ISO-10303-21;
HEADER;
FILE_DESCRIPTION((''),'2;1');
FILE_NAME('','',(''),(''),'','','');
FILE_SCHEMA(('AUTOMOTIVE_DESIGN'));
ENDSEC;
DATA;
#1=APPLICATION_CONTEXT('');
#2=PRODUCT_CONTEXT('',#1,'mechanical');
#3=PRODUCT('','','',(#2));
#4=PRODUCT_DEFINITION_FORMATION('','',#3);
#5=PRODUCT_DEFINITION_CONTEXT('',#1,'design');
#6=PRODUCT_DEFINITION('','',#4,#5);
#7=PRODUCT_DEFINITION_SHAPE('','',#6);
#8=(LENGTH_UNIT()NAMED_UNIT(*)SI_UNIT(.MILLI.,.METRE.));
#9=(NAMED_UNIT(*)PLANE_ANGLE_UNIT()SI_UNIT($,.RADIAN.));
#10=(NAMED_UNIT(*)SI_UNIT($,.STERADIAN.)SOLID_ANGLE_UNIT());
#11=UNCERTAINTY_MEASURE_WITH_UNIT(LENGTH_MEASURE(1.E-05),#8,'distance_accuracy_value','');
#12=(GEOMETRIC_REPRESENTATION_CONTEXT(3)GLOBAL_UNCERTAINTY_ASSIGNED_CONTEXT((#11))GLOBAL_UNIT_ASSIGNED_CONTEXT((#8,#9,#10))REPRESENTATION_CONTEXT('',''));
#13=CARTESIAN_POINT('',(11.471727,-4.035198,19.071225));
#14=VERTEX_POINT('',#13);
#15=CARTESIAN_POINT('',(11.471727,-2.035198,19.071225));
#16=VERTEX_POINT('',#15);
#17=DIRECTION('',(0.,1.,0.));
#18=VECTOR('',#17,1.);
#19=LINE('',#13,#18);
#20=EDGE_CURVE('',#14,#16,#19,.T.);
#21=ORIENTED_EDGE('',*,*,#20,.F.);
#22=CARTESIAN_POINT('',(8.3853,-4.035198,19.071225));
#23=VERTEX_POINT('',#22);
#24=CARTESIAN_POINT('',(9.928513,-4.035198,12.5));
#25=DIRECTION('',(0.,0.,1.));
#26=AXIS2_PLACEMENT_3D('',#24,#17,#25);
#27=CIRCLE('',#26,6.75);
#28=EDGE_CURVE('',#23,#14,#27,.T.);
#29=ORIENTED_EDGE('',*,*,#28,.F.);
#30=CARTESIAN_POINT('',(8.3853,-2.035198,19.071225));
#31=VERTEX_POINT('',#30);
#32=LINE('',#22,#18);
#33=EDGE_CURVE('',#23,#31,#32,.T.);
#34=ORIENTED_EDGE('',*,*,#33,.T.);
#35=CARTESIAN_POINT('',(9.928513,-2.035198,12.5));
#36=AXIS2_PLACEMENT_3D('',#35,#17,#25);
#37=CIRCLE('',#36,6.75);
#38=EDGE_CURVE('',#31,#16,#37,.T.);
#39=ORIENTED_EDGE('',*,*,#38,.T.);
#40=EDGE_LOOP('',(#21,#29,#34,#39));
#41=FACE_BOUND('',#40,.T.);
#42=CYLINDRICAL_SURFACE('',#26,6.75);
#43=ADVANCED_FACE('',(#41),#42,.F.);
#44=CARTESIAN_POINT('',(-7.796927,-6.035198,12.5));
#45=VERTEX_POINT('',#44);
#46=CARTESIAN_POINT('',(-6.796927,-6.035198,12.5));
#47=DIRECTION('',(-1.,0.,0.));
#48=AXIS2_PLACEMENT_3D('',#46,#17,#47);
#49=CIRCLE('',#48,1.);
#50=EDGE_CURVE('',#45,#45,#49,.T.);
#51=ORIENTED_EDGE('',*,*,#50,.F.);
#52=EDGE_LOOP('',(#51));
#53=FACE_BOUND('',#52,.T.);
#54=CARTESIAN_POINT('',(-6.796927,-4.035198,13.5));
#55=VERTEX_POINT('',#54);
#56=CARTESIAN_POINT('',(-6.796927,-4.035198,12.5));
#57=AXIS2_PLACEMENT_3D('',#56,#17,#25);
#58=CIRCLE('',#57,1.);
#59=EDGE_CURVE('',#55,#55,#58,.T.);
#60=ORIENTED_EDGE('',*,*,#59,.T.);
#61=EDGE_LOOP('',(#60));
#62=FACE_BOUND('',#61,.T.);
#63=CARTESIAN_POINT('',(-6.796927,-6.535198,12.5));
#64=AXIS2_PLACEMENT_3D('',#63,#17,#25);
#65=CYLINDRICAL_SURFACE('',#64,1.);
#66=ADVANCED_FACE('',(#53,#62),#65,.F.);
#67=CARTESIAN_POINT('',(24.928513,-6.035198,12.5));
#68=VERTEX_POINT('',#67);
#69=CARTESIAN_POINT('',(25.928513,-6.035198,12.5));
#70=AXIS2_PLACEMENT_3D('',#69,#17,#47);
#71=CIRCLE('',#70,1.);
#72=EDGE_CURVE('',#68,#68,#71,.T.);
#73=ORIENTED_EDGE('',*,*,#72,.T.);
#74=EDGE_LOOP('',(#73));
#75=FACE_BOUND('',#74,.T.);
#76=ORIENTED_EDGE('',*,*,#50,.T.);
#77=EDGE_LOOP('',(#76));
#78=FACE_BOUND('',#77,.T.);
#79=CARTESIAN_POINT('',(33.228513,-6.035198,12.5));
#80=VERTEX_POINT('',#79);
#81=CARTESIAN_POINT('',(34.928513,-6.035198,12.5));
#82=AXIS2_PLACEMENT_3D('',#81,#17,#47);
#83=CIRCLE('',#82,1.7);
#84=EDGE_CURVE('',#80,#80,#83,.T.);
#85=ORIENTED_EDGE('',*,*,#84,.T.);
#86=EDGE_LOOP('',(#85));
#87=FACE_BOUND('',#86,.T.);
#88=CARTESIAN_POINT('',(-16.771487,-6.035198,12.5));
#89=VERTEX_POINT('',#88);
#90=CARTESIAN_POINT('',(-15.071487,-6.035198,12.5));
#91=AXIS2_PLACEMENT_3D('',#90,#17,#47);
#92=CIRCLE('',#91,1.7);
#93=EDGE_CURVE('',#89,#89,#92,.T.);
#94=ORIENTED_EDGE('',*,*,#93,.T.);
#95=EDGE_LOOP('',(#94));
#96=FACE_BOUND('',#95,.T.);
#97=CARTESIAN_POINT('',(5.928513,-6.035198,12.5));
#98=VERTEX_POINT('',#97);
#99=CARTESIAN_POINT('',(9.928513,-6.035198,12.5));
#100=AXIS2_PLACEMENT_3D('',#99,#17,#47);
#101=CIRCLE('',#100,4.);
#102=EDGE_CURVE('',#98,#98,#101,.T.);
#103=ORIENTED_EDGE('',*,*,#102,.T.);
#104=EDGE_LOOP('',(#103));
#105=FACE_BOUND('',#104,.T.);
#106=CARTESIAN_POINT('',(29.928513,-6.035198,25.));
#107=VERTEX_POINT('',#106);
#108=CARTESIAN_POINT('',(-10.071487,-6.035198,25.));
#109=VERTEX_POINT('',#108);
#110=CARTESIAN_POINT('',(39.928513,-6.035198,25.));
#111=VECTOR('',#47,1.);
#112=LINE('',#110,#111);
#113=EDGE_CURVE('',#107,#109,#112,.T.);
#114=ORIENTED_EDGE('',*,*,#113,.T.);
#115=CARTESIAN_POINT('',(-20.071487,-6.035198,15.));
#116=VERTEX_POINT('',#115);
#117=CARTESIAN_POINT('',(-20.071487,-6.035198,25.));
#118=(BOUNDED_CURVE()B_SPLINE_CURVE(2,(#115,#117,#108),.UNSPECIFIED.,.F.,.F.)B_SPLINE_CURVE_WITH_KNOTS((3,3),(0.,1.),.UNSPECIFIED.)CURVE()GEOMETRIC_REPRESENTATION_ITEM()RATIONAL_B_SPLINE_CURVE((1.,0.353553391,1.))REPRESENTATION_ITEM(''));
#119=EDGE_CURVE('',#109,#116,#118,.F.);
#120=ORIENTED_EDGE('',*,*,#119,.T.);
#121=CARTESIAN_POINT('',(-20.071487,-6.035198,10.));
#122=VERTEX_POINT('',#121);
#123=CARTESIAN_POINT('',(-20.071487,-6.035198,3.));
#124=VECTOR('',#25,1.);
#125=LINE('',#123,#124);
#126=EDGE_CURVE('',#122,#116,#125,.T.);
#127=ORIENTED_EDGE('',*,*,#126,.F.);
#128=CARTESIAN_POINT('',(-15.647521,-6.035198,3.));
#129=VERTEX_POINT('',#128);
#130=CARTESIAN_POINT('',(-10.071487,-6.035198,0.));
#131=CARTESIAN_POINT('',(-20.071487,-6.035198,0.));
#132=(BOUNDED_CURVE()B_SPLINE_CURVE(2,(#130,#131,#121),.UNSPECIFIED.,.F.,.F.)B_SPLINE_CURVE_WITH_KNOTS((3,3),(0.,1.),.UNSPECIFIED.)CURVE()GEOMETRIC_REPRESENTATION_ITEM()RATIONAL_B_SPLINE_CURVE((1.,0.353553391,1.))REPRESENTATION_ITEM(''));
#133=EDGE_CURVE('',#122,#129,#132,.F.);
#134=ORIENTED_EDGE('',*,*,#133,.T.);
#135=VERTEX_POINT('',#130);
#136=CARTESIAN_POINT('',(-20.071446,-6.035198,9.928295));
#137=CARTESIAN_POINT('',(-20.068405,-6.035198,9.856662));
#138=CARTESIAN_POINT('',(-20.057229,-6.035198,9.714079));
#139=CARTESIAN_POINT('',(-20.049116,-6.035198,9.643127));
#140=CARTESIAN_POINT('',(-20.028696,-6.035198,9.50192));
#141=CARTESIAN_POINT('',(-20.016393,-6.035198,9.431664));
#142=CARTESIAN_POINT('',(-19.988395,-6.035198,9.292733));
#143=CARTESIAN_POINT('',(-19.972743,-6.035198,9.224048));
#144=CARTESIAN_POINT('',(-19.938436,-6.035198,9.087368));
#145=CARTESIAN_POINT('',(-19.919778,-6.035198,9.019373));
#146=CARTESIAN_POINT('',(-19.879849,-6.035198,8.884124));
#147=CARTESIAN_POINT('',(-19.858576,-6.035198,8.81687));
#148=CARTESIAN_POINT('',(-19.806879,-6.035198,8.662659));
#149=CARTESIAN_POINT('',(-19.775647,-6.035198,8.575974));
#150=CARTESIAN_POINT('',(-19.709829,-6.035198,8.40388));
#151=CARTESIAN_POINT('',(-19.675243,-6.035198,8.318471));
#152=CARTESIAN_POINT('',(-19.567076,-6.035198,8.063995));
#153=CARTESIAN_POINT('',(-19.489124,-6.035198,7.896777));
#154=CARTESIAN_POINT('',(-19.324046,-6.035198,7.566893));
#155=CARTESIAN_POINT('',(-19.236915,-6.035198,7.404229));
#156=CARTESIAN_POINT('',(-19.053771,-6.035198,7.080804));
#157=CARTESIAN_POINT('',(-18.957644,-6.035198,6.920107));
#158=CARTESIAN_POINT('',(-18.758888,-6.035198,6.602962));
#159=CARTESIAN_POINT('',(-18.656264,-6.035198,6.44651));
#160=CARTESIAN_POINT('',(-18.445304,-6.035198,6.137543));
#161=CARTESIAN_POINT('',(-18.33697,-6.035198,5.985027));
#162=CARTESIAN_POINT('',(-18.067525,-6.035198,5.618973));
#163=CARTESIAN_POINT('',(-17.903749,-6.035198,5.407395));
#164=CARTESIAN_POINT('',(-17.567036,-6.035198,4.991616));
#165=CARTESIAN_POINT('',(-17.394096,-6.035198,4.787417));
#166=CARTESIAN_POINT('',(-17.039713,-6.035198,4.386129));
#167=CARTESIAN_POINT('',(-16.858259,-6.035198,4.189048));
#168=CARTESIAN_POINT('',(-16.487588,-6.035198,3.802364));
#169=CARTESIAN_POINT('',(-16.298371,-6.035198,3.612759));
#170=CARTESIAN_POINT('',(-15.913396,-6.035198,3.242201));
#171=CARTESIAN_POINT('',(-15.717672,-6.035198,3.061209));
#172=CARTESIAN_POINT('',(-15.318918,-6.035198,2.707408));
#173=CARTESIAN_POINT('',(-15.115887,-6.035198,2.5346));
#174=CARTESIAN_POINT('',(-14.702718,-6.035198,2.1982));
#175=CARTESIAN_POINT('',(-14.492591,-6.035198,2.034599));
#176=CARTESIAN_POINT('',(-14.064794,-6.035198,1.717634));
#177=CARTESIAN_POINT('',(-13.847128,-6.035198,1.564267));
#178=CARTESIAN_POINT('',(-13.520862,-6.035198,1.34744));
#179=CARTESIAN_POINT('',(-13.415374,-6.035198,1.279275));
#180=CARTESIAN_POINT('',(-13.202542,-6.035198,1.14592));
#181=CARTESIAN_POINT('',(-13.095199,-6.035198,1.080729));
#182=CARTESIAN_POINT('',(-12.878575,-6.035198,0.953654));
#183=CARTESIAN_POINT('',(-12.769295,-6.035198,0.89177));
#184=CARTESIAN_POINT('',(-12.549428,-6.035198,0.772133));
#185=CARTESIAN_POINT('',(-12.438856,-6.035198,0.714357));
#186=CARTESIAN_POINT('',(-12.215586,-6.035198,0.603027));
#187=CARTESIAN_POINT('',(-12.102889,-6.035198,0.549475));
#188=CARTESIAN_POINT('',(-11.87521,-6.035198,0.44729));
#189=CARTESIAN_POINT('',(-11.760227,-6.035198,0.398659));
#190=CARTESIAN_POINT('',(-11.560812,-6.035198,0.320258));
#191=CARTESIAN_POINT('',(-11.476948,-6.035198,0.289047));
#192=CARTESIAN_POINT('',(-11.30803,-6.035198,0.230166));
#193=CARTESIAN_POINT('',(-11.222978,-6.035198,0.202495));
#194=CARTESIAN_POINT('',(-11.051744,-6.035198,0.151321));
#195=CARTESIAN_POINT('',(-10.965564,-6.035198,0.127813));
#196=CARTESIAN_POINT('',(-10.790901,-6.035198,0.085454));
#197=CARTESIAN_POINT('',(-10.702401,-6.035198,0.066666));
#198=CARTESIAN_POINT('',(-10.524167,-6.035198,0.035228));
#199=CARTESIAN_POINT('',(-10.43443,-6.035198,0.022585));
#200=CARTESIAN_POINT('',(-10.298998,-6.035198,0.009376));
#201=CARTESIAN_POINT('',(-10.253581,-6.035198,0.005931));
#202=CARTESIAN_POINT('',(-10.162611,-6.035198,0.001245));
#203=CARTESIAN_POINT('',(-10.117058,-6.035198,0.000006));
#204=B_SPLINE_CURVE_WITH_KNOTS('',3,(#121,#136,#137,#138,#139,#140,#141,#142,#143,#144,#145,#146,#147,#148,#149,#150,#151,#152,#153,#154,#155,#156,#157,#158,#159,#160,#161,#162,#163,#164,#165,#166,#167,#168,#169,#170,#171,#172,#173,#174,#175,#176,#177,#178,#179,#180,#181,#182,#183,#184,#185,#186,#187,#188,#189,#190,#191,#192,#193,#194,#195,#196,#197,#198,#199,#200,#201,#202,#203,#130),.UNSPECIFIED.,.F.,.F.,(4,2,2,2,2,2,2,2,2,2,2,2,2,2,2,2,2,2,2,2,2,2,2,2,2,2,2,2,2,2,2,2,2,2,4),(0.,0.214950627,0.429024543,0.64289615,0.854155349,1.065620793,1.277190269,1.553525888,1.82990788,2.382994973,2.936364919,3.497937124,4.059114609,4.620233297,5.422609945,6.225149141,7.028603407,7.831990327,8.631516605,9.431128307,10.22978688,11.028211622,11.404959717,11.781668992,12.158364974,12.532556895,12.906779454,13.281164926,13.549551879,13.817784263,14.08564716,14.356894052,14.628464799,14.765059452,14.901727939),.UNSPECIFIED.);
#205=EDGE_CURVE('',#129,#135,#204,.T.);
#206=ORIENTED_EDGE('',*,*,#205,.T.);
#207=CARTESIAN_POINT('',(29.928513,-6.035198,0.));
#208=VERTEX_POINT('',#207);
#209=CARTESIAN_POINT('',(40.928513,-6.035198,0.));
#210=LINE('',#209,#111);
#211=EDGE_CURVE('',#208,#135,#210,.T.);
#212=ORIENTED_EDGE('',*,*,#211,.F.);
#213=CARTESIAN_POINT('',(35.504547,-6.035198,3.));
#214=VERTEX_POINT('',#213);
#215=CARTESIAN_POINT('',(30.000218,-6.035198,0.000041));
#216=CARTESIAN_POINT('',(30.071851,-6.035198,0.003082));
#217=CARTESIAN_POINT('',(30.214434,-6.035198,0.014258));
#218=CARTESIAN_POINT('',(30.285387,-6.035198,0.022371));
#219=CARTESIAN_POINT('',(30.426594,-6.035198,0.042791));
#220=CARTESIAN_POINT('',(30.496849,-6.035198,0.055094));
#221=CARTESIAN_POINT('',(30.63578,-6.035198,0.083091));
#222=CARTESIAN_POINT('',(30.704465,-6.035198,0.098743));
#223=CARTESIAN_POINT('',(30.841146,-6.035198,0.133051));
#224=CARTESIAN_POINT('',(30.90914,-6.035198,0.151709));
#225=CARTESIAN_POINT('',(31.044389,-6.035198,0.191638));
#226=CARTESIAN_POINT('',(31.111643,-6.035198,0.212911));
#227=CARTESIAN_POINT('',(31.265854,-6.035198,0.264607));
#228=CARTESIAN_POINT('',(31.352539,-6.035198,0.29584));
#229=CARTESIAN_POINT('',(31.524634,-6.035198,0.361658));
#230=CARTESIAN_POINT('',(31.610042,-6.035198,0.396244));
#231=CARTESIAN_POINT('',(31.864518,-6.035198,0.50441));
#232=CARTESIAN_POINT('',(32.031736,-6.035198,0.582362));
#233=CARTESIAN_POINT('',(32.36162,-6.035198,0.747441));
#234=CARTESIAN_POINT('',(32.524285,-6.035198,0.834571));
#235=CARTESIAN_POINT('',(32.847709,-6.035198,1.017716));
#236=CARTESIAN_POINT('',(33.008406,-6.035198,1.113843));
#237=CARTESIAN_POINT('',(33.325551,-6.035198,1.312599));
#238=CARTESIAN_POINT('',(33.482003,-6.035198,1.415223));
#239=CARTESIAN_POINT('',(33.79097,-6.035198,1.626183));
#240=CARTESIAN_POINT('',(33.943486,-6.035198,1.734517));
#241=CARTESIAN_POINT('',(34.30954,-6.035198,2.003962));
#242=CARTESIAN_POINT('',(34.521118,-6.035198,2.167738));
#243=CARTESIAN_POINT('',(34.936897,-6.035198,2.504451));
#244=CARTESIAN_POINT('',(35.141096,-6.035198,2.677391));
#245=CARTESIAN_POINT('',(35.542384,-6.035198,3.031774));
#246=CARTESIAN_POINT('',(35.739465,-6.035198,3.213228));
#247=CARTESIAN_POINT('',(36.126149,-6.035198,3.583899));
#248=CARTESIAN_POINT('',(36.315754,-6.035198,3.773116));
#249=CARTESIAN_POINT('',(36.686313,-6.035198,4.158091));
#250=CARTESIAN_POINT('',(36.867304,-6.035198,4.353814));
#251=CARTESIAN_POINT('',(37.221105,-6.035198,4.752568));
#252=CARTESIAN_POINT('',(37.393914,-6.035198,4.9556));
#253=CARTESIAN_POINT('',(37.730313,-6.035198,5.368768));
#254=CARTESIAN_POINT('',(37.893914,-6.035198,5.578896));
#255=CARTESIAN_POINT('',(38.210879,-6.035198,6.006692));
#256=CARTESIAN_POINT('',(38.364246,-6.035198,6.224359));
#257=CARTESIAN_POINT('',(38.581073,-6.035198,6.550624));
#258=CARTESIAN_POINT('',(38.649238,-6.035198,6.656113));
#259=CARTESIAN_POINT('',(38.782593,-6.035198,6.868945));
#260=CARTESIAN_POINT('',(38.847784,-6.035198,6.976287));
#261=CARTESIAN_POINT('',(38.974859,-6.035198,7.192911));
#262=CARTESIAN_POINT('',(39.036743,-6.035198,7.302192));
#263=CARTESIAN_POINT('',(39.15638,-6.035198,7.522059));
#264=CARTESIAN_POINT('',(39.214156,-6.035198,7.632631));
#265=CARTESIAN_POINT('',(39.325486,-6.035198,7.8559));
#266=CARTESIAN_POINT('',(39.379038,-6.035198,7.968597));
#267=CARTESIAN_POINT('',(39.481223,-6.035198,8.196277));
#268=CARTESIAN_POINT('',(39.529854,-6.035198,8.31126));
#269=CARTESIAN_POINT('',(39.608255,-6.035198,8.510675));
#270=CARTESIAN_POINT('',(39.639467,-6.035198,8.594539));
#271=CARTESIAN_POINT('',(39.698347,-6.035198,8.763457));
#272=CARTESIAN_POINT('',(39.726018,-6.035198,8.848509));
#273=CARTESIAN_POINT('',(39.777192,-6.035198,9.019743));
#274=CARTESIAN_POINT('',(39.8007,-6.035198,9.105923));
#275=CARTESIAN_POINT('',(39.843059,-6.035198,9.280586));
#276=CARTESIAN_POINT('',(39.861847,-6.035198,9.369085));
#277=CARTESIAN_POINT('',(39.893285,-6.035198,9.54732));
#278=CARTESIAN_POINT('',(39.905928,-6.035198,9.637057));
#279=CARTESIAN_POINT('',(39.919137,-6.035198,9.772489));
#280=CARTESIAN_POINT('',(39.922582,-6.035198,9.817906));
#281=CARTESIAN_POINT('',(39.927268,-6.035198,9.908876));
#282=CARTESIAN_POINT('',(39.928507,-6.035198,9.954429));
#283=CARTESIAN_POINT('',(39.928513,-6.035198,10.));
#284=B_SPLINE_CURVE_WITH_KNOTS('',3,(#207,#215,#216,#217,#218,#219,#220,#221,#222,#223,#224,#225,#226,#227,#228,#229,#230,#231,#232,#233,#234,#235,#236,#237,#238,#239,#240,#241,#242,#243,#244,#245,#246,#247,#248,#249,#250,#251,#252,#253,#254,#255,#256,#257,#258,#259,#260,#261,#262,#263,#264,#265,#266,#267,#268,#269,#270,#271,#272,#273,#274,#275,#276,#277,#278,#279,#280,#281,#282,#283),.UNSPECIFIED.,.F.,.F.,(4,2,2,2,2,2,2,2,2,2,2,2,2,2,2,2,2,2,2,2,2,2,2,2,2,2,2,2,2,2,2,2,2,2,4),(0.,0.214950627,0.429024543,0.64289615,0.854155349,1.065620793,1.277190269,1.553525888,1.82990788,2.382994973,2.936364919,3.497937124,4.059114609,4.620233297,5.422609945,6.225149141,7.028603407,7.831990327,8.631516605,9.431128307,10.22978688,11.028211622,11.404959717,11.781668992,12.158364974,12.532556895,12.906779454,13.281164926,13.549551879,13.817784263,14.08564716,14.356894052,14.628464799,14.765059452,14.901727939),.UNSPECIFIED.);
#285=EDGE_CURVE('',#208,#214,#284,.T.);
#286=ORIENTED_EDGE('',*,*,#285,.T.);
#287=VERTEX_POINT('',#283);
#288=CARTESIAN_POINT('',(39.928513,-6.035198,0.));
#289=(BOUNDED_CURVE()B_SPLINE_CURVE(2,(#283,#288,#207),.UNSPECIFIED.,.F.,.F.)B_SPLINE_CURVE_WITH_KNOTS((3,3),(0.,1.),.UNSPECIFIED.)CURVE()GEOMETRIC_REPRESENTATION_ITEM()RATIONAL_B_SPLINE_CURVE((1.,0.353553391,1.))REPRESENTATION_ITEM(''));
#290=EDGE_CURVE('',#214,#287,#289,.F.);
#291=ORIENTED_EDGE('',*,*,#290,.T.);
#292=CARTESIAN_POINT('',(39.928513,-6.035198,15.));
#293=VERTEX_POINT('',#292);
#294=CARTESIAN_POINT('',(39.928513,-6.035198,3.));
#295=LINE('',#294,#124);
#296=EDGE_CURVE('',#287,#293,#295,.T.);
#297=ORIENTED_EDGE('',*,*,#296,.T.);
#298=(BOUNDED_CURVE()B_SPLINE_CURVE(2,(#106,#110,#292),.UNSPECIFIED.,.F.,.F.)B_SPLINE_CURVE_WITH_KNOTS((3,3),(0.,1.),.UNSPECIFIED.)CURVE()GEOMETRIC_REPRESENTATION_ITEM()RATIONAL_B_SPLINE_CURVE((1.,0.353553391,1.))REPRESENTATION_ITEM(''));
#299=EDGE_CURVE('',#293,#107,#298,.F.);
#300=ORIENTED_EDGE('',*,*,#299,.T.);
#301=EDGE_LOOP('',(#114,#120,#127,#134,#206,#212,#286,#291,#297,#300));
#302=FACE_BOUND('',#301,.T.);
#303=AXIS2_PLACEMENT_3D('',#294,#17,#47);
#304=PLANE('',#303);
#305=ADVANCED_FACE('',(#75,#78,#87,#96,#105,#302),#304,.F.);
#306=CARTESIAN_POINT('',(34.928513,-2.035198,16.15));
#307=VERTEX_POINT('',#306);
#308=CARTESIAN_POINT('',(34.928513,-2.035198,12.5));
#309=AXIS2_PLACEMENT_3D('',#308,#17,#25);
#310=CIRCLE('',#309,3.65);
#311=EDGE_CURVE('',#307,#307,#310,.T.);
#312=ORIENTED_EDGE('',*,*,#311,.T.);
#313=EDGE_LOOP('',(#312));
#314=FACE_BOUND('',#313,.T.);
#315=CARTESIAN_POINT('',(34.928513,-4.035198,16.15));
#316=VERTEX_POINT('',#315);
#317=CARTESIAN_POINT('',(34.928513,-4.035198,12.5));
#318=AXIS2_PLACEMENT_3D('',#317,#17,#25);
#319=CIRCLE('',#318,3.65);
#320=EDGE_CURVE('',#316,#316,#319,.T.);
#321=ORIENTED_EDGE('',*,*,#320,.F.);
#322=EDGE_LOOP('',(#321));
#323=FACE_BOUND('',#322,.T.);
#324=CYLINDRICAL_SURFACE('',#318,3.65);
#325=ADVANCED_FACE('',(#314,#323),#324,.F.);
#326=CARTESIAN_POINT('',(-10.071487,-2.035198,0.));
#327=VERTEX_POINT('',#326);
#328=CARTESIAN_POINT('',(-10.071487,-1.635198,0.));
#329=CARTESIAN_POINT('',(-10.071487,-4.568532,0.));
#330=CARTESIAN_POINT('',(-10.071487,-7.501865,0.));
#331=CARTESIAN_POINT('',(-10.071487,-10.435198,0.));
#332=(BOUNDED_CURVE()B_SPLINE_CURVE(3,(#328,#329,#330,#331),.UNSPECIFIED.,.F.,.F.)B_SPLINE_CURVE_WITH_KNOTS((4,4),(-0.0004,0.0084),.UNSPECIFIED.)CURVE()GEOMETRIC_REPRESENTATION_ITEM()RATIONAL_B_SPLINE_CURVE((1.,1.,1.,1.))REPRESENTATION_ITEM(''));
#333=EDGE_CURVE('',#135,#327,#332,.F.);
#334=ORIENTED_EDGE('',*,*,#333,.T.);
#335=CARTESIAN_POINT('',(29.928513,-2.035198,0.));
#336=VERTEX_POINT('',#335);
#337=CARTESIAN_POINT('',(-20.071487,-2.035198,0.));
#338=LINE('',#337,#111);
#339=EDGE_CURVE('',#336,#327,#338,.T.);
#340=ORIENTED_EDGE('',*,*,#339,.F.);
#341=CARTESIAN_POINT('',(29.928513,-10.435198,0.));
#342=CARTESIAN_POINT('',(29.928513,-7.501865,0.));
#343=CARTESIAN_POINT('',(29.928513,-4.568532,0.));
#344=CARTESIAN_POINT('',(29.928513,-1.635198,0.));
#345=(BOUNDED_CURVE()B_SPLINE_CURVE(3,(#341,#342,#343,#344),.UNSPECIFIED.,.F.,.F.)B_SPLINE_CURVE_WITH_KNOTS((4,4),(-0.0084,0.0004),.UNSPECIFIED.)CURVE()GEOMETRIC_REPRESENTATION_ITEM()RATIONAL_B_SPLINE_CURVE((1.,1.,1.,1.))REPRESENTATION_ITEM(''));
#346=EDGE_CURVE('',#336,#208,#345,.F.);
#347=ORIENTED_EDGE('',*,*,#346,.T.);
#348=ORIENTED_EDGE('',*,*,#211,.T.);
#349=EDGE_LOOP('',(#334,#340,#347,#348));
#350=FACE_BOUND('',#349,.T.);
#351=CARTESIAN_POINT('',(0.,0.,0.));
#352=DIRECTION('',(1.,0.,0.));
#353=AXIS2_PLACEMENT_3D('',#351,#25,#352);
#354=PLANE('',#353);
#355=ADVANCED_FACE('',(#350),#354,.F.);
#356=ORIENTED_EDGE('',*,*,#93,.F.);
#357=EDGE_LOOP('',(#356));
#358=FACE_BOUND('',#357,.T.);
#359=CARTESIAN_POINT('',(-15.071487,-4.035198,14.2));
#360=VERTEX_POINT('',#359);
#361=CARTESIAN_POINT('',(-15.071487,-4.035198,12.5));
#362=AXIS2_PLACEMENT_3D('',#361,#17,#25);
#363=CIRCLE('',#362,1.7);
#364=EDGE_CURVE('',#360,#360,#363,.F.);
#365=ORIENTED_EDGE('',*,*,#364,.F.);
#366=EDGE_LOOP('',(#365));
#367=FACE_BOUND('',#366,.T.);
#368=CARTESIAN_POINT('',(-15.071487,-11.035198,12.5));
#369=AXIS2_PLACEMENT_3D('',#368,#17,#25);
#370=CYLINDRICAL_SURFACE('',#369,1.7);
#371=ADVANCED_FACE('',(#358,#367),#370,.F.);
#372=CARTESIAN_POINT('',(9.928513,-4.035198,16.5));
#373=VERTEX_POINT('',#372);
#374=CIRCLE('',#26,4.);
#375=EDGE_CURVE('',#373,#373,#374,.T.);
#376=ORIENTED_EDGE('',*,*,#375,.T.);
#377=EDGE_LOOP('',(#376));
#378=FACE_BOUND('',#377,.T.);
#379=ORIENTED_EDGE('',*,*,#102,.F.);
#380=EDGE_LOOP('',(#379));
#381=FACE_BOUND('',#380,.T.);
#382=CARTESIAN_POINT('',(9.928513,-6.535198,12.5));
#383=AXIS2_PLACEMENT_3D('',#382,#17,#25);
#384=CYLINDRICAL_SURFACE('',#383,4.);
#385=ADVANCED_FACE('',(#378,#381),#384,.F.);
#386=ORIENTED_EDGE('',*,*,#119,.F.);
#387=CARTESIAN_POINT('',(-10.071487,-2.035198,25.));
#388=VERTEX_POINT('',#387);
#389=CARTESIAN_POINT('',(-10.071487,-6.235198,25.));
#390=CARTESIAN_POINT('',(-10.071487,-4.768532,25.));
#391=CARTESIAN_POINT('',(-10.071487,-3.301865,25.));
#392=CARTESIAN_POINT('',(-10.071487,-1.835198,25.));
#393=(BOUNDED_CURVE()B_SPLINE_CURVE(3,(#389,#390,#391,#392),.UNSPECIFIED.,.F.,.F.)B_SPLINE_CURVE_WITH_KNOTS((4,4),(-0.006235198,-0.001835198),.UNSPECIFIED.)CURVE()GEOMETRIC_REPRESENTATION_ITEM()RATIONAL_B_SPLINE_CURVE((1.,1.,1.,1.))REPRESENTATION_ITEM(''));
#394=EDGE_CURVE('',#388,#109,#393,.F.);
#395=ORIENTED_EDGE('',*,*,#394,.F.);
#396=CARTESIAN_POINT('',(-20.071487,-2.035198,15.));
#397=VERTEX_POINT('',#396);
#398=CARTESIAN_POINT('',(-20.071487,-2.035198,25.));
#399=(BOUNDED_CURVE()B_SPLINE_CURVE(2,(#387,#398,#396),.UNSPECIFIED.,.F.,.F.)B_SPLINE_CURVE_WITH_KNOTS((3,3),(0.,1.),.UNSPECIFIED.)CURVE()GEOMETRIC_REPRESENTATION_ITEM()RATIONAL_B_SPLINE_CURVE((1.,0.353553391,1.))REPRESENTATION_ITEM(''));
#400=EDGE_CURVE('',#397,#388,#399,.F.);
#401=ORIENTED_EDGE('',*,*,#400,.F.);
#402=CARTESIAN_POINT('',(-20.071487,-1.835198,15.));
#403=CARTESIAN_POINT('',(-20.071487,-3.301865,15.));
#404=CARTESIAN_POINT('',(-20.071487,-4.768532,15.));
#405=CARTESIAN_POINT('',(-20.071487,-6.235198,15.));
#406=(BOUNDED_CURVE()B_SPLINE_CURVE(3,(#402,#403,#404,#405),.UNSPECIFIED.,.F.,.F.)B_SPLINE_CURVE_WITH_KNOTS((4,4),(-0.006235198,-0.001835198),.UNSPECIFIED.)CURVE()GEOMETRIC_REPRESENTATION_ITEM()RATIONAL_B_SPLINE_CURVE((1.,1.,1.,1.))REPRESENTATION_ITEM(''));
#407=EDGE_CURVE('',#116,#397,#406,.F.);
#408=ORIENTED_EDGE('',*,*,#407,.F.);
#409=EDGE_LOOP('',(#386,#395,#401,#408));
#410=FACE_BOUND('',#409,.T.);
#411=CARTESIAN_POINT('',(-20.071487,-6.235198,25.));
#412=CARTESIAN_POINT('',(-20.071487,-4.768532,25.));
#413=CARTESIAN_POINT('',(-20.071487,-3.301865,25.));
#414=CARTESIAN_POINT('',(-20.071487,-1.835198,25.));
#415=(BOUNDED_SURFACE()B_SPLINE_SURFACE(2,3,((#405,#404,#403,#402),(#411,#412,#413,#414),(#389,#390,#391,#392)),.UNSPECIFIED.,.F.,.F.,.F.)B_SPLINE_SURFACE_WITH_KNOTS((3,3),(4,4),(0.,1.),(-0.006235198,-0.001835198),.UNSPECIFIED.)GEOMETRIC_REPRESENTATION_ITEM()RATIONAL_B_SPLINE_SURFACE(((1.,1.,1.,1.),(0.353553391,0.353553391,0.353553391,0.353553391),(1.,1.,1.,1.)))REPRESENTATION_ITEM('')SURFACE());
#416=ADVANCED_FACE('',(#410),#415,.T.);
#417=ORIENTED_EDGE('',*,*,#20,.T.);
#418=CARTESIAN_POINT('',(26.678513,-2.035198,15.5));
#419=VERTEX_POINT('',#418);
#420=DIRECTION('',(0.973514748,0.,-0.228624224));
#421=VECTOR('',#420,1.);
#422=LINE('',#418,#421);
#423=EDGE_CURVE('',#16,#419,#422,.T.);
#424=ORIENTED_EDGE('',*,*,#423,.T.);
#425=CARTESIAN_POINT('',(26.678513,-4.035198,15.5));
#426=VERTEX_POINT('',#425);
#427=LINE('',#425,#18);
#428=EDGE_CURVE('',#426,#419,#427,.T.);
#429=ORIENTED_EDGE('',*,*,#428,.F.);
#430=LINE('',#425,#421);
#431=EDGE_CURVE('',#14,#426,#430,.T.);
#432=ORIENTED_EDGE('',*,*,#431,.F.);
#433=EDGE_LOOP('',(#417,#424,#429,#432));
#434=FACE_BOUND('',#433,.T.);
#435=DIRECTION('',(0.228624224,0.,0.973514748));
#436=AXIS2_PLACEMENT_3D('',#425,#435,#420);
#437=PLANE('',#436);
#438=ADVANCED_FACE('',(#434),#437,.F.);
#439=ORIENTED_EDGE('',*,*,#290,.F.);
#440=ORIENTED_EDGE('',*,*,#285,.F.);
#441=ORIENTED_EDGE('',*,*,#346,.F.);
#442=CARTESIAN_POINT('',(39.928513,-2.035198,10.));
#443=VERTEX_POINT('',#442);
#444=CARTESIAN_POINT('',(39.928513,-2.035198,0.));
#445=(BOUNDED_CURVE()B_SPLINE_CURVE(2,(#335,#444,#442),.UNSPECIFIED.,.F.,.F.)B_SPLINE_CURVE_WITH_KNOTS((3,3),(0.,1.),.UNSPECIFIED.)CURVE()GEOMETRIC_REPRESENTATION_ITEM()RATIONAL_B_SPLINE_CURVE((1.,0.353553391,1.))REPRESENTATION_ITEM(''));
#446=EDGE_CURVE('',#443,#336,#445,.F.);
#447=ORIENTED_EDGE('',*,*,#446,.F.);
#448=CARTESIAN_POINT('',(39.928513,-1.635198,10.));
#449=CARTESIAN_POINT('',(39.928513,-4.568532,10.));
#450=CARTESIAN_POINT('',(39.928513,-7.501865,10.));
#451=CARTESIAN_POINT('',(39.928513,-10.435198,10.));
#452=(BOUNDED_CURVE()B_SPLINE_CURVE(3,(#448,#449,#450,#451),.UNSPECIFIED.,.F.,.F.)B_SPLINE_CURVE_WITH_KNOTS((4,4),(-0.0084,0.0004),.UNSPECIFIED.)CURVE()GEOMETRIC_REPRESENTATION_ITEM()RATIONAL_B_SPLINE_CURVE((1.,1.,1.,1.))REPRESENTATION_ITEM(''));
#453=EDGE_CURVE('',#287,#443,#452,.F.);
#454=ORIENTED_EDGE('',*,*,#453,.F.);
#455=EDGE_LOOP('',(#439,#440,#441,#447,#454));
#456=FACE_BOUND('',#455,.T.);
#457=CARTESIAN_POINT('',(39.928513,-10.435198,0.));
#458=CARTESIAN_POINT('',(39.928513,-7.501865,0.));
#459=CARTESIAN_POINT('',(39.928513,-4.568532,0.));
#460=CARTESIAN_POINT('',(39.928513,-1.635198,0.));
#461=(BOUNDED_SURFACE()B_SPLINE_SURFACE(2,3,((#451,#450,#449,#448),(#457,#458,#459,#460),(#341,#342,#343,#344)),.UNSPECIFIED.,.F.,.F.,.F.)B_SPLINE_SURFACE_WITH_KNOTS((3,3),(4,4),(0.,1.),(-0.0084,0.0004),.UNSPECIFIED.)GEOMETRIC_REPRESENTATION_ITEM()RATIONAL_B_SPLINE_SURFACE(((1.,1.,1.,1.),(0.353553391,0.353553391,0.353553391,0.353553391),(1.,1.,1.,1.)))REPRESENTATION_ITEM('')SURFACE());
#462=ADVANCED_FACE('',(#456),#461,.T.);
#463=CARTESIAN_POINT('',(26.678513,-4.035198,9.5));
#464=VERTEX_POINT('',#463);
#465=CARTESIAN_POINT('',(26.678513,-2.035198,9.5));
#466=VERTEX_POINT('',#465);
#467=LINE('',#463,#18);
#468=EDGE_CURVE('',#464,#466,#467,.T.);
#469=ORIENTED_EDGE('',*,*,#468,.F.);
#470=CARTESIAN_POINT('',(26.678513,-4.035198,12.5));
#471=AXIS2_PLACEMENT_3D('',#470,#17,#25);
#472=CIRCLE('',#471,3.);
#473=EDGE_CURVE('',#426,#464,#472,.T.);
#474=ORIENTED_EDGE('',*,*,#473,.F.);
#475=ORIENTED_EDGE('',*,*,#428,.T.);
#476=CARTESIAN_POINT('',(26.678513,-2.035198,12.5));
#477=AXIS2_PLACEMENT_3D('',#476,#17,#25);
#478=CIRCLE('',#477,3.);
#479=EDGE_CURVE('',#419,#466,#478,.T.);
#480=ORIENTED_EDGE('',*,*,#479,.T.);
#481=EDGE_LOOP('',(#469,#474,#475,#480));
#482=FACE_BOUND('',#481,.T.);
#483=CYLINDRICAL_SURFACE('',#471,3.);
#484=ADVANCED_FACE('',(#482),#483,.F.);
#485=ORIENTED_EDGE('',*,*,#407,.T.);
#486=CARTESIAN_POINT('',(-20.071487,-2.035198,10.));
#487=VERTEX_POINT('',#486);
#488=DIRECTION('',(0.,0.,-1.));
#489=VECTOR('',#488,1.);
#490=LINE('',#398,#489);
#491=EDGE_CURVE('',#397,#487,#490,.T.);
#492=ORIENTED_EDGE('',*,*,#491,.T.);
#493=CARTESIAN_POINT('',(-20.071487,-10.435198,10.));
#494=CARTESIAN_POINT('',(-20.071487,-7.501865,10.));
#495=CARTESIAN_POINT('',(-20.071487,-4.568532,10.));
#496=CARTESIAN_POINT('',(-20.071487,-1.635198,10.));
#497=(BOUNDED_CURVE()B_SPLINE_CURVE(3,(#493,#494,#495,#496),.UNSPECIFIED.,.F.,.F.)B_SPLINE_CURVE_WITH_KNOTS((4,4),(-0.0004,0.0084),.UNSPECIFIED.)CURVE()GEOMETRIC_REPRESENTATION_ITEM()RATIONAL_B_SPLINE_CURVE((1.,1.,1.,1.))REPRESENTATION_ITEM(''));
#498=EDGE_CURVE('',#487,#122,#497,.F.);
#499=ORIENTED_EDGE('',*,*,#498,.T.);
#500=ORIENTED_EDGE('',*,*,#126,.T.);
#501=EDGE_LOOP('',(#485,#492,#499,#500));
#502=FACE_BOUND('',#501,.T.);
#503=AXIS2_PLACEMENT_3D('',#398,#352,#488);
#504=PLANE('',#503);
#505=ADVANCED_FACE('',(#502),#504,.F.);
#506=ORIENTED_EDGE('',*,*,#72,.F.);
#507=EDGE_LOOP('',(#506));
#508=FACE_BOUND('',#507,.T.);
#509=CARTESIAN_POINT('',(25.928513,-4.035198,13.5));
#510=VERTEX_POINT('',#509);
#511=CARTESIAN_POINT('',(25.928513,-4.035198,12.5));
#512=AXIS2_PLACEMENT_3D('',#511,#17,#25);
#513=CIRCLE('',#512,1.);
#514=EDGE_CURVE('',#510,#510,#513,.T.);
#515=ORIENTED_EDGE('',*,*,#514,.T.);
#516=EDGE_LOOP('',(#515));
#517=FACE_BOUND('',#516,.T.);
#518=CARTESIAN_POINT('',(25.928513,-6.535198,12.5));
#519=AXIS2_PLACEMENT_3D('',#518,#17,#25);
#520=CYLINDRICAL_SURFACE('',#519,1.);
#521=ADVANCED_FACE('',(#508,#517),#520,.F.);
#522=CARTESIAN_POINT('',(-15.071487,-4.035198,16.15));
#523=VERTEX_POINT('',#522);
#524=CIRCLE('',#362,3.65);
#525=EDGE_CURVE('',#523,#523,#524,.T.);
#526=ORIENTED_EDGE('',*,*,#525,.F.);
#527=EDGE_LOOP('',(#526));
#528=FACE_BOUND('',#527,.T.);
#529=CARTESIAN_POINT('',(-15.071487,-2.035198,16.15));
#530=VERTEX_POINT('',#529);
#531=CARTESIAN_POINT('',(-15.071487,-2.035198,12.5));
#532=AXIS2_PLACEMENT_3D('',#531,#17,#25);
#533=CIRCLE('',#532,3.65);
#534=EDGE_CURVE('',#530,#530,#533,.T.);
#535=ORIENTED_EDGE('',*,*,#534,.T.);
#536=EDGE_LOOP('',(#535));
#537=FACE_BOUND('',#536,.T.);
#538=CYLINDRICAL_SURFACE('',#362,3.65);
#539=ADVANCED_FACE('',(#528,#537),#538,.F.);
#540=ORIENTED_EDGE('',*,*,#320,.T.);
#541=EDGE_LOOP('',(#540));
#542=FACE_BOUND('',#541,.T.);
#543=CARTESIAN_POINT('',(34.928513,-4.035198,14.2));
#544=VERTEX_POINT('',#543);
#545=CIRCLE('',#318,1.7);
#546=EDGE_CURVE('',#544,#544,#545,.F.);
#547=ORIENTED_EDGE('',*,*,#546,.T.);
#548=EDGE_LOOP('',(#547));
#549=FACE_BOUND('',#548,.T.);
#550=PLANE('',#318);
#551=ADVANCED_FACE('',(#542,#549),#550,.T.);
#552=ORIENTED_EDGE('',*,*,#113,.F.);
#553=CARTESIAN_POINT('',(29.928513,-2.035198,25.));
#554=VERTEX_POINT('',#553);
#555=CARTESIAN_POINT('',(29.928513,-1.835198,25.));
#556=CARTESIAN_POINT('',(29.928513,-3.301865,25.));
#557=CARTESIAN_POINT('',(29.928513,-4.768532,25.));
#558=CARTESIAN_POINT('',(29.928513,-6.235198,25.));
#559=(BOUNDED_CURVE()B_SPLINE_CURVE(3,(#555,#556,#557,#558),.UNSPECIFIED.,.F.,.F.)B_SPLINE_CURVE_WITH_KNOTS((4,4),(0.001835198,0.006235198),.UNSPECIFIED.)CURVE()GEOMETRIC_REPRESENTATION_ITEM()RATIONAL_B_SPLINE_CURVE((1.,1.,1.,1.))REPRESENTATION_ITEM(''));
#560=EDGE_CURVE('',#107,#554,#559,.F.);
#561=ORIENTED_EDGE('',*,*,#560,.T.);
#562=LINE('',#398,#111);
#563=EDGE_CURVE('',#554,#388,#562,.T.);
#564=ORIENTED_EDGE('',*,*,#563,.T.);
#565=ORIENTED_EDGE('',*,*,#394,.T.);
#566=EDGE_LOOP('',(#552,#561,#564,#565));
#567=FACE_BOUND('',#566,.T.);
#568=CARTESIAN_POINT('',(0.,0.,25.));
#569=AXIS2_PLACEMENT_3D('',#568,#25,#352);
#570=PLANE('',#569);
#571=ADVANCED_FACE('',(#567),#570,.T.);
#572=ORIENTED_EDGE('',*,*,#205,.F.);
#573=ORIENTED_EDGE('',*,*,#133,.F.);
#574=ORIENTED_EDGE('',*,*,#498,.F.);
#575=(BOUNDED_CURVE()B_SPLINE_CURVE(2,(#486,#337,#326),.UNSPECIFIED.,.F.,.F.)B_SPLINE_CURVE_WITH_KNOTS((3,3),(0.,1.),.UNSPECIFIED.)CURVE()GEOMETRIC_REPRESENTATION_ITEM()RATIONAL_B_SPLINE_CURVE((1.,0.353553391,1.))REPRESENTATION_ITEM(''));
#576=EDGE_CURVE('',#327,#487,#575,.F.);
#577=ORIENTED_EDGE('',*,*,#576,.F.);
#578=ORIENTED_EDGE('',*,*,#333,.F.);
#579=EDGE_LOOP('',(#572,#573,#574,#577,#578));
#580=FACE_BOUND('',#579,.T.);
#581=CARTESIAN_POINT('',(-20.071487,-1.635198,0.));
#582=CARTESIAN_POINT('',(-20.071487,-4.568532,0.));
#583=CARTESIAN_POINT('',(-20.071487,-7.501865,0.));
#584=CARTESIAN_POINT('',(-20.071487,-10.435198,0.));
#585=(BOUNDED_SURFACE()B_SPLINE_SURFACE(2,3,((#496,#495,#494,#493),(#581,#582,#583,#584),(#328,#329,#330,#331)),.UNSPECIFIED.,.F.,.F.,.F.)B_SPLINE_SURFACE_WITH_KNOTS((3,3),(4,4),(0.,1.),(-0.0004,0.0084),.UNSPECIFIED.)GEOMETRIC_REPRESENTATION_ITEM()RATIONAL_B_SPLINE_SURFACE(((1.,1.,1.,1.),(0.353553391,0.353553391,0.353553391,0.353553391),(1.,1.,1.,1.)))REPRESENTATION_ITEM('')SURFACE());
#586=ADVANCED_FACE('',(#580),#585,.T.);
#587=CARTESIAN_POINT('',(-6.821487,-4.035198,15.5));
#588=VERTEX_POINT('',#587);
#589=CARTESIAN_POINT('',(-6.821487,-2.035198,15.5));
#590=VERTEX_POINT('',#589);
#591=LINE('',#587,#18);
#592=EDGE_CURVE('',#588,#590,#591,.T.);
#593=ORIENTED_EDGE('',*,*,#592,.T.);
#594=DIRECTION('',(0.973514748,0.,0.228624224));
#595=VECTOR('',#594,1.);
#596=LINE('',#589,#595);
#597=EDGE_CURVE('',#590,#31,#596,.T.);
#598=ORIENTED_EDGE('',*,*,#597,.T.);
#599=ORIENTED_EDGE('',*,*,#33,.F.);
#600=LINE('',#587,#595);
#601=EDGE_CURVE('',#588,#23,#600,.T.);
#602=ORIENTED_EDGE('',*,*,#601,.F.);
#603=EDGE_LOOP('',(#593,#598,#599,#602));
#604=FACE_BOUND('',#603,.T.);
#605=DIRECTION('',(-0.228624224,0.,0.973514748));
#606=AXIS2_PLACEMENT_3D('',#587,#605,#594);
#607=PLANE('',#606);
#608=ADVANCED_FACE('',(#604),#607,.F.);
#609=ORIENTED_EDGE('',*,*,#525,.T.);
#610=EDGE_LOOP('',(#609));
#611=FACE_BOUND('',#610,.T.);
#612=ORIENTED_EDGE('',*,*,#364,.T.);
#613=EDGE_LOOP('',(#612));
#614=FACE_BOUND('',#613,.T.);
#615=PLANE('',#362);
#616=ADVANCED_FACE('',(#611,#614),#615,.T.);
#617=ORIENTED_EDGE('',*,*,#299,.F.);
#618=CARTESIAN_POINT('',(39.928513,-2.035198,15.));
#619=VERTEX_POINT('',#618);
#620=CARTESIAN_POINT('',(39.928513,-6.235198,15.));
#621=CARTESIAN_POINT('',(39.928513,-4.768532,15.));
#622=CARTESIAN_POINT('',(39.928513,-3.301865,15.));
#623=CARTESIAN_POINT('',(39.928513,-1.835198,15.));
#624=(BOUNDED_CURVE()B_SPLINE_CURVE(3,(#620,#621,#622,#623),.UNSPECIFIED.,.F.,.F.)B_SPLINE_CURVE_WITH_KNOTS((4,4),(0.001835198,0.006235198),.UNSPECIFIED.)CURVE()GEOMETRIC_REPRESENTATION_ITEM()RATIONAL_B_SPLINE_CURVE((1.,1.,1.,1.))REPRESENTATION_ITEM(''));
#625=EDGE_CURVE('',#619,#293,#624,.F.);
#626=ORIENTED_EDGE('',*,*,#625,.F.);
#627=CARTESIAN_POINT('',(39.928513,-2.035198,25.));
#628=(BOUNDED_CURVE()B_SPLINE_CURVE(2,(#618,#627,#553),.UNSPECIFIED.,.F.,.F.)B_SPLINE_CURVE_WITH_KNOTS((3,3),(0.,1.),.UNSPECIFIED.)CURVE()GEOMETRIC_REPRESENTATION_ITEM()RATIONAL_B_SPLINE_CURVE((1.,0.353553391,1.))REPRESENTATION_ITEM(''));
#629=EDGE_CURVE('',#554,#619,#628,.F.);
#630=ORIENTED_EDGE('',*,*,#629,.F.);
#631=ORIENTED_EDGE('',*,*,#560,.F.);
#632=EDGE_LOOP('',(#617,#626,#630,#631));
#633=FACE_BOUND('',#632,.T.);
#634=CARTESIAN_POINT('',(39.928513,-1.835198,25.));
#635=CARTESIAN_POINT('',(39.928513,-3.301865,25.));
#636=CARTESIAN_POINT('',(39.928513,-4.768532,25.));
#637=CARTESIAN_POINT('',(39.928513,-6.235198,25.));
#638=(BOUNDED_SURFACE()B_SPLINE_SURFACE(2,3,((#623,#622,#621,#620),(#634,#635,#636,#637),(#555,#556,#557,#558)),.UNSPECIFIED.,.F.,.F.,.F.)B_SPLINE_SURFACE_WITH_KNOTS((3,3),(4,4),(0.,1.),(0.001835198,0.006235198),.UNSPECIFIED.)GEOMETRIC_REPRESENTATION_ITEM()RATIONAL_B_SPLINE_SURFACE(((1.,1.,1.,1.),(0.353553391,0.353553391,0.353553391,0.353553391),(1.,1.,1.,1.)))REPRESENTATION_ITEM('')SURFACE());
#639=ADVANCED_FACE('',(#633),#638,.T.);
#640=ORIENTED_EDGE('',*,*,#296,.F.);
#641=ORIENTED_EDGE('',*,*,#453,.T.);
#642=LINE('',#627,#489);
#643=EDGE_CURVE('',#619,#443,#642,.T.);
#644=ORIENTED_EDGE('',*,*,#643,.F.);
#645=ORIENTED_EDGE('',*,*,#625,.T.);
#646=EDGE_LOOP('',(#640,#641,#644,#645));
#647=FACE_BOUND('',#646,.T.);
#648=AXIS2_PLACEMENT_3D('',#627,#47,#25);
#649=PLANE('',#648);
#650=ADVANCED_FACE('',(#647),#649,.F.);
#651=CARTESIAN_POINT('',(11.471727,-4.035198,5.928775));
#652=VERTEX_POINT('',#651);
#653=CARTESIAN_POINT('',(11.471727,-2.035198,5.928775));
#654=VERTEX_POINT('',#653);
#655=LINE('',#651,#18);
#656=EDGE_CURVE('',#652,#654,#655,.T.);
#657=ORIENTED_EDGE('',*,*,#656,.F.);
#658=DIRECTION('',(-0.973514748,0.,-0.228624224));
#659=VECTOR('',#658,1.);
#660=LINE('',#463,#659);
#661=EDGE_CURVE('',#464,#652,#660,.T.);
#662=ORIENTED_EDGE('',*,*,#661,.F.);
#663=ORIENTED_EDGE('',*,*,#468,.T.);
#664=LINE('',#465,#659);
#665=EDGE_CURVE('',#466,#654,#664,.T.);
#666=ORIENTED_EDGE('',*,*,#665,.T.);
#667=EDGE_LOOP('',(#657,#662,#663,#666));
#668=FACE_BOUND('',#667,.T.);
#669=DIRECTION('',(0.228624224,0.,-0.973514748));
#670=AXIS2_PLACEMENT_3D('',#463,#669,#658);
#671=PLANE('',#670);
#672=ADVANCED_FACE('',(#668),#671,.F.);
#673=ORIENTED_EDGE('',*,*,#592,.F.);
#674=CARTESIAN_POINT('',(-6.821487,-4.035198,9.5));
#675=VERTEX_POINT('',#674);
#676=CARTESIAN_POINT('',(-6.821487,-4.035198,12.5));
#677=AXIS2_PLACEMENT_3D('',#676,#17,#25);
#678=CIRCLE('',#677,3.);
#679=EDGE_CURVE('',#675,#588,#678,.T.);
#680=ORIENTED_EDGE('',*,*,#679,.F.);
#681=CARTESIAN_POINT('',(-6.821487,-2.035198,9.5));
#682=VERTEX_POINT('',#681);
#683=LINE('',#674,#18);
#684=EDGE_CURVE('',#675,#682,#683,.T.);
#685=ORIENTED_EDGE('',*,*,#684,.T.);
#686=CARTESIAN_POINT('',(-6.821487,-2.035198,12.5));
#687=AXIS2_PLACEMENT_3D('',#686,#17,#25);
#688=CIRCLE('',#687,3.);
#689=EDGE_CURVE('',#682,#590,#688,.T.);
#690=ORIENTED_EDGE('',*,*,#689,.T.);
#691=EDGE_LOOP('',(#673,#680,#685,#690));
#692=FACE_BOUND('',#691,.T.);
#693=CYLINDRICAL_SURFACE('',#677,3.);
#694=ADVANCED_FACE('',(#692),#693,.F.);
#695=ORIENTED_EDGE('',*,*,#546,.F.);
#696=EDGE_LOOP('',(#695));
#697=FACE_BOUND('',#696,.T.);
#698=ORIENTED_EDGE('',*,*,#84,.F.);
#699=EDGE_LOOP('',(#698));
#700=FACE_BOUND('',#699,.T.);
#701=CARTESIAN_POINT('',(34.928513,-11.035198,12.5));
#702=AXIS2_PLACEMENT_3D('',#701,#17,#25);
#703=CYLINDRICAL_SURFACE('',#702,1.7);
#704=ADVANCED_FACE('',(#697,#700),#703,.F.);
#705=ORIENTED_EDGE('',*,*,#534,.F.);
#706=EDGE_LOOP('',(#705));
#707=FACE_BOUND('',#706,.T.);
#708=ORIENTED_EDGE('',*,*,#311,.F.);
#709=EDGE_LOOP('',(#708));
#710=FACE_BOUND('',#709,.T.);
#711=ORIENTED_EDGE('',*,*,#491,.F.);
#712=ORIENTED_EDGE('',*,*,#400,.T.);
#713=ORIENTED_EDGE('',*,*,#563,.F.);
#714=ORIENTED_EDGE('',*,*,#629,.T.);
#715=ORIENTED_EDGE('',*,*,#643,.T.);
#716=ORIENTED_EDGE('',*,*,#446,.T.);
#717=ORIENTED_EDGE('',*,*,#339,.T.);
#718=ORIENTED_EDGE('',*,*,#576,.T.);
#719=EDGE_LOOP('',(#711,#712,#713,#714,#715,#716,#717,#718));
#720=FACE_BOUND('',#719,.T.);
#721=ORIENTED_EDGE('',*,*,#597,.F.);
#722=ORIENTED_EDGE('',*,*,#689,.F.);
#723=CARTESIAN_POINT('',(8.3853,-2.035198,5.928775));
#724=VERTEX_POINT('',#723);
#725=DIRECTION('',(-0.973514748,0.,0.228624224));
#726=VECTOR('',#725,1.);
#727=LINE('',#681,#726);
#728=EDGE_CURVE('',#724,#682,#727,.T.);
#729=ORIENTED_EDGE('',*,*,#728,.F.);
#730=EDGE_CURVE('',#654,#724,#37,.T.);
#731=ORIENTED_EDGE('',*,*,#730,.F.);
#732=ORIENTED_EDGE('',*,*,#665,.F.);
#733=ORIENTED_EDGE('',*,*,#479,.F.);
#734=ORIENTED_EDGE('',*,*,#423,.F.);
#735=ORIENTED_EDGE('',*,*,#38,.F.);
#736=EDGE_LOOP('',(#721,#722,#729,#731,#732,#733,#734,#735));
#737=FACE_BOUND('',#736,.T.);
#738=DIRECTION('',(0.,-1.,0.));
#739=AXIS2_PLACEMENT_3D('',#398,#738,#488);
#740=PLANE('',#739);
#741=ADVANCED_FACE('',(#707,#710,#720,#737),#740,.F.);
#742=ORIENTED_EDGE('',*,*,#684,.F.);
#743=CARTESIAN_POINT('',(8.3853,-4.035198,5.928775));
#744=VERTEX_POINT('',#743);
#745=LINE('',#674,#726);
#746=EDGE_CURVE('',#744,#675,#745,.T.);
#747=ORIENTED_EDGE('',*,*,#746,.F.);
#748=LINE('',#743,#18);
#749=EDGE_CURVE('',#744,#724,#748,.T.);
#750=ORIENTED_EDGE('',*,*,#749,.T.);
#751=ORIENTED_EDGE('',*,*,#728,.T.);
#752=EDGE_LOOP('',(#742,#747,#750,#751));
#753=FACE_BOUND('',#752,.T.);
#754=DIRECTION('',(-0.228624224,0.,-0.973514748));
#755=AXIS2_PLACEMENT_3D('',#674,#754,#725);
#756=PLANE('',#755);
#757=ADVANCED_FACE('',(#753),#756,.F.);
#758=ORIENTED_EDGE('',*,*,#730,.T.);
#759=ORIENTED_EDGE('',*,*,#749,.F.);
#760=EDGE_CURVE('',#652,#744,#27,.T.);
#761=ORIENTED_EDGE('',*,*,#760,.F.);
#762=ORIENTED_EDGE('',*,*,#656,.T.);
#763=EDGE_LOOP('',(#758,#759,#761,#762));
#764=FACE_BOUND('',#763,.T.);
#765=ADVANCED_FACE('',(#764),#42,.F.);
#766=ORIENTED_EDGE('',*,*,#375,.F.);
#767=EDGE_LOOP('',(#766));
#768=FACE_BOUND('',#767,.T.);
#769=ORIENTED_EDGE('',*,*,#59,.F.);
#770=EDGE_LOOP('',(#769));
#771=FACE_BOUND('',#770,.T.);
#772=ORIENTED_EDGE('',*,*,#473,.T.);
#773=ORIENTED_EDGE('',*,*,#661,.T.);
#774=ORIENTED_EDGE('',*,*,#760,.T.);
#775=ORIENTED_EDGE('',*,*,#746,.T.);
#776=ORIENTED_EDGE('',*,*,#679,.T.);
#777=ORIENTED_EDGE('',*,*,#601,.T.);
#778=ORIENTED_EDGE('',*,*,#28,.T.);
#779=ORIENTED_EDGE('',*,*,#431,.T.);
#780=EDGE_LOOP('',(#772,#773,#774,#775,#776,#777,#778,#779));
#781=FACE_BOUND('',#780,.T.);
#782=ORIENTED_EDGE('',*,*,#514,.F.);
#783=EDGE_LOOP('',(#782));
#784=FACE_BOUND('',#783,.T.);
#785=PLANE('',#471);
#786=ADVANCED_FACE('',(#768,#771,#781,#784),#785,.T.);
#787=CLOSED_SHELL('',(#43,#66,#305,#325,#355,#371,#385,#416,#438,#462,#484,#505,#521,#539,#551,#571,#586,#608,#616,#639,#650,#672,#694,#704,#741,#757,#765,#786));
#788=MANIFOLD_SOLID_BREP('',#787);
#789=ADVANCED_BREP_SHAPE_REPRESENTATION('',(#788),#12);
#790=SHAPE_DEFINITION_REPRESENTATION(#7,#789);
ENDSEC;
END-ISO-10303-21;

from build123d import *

# Parameters (mm, degrees)
SKETCH1_W           = 60
SKETCH1_H           = 8
BOSS_EXTRUDE1_DEPTH = 25
SKETCH2_W           = 60
SKETCH2_H           = 2
CUT_EXTRUDE1_DEPTH  = 22
CUT_EXTRUDE2_DEPTH  = 2
SKETCH4_R           = 1
SKETCH4_R_2         = 4
CUT_EXTRUDE3_DEPTH  = 2.5
SKETCH5_R           = 1.7
CUT_EXTRUDE4_DEPTH  = 9
FILLET2_SIZE        = 10
SKETCH6_R           = 3
CUT_EXTRUDE5_DEPTH  = 4.5
CUT_EXTRUDE6_DEPTH  = 1
SKETCH8_R           = 3.65
CUT_EXTRUDE7_DEPTH  = 2
SKETCH10_W          = 50
SKETCH10_H          = 4
CUT_EXTRUDE8_DEPTH  = 61


with BuildPart() as part:
    # Sketch1 → Boss-Extrude1 (new body)
    with BuildSketch(Plane.XY):
        with Locations((9.92851316, -6.03519833)):
            Rectangle(SKETCH1_W, SKETCH1_H)
    extrude(amount=BOSS_EXTRUDE1_DEPTH)

    # Sketch2 → Cut-Extrude1 (cut)
    with BuildSketch(Plane.XY.offset(25)):
        with Locations((9.92851316, -7.03519833)):
            Rectangle(SKETCH2_W, SKETCH2_H)
    extrude(amount=-CUT_EXTRUDE1_DEPTH, mode=Mode.SUBTRACT)

    # Sketch3 → Cut-Extrude2 (cut)
    with BuildSketch(Plane(origin=(0, -2.03519833, 0), x_dir=(1, 0, 0), z_dir=(0, 1, 0))):
        with BuildLine():
            Line((26.67851316, -9.5), (11.471726674, -5.928775453))
            ThreePointArc((11.471726674, -5.928775453), (9.92851316, -5.75), (8.385299646, -5.928775453))
            Line((8.385299646, -5.928775453), (-6.82148684, -9.5))
            ThreePointArc((-6.82148684, -9.5), (-9.821486841, -12.5), (-6.82148684, -15.5))
            Line((-6.82148684, -15.5), (8.385299646, -19.071224547))
            ThreePointArc((8.385299646, -19.071224547), (9.92851316, -19.25), (11.471726674, -19.071224547))
            Line((11.471726674, -19.071224547), (26.67851316, -15.5))
            ThreePointArc((26.67851316, -15.5), (29.67851316, -12.5), (26.67851316, -9.5))
        make_face()
    extrude(amount=-CUT_EXTRUDE2_DEPTH, mode=Mode.SUBTRACT)

    # Sketch4 → Cut-Extrude3 (cut)
    with BuildSketch(Plane(origin=(0, -4.03519833, 0), x_dir=(1, 0, 0), z_dir=(0, 1, 0))):
        with Locations(Location((-6.796927173, -12.5, 0), (0, 0, 270))):
            Circle(SKETCH4_R)
        with Locations(Location((9.92851316, -12.5, 0), (0, 0, 270))):
            Circle(SKETCH4_R_2)
        with Locations(Location((25.92851316, -12.5, 0), (0, 0, 270))):
            Circle(SKETCH4_R)
    extrude(amount=-CUT_EXTRUDE3_DEPTH, mode=Mode.SUBTRACT)

    # Sketch5 → Cut-Extrude4 (cut)
    with BuildSketch(Plane(origin=(0, -2.03519833, 0), x_dir=(1, 0, 0), z_dir=(0, 1, 0))):
        with Locations(Location((34.92851316, -12.5, 0), (0, 0, 270))):
            Circle(SKETCH5_R)
        with Locations(Location((-15.07148684, -12.5, 0), (0, 0, 270))):
            Circle(SKETCH5_R)
    extrude(amount=-CUT_EXTRUDE4_DEPTH, mode=Mode.SUBTRACT)

    # Fillet2
    # a fillet whose section is not a circle: 10 mm, written as the material it takes off along each edge
    with BuildSketch(Plane(origin=(-20.07148684, -31.03519833, 25), x_dir=(0, 0, -1), z_dir=(0, 1, 0))) as fillet2_piece_1:
        with BuildLine():
            Bezier((FILLET2_SIZE, 0), (0, 0), (0, -FILLET2_SIZE), weights=[1, 0.353553391, 1])
            Line((0, -FILLET2_SIZE), (0, 0))
            Line((0, 0), (FILLET2_SIZE, 0))
        make_face()
    extrude(amount=54, mode=Mode.SUBTRACT)
    with BuildSketch(Plane(origin=(-20.07148684, -35.03519833, 25), x_dir=(0, 0, -1), z_dir=(0, 1, 0)), Plane(origin=(39.92851316, 16.96480167, 25), x_dir=(0, 0, -1), z_dir=(0, -1, 0))) as fillet2_piece_2:
        with BuildLine():
            Bezier((FILLET2_SIZE, 0), (0, 0), (0, -FILLET2_SIZE), weights=[1, 0.353553391, 1])
            Line((0, -FILLET2_SIZE), (0, 0))
            Line((0, 0), (FILLET2_SIZE, 0))
        make_face()
    extrude(amount=52, mode=Mode.SUBTRACT)
    with BuildSketch(Plane(origin=(39.92851316, 22.96480167, 25), x_dir=(-1, 0, 0), z_dir=(0, -1, 0))) as fillet2_piece_3:
        with BuildLine():
            Bezier((FILLET2_SIZE, 0), (0, 0), (0, FILLET2_SIZE), weights=[1, 0.353553391, 1])
            Line((0, FILLET2_SIZE), (0, 0))
            Line((0, 0), (FILLET2_SIZE, 0))
        make_face()
    extrude(amount=54, mode=Mode.SUBTRACT)
    with BuildSketch(Plane(origin=(39.92851316, 22.96480167, 0), x_dir=(-1, 0, 0), z_dir=(0, -1, 0))) as fillet2_piece_4:
        with BuildLine():
            Bezier((FILLET2_SIZE, 0), (0, 0), (0, -FILLET2_SIZE), weights=[1, 0.353553391, 1])
            Line((0, -FILLET2_SIZE), (0, 0))
            Line((0, 0), (FILLET2_SIZE, 0))
        make_face()
    extrude(amount=58, mode=Mode.SUBTRACT)
    with BuildSketch(Plane(origin=(-20.07148684, -35.03519833, 0), x_dir=(0, 0, 1), z_dir=(0, 1, 0))) as fillet2_piece_5:
        with BuildLine():
            Bezier((FILLET2_SIZE, 0), (0, 0), (0, FILLET2_SIZE), weights=[1, 0.353553391, 1])
            Line((0, FILLET2_SIZE), (0, 0))
            Line((0, 0), (FILLET2_SIZE, 0))
        make_face()
    extrude(amount=58, mode=Mode.SUBTRACT)

    # Sketch6 → Cut-Extrude5 (cut)
    with BuildSketch(Plane(origin=(0, -8.03519833, 0), x_dir=(1, 0, 0), z_dir=(0, 1, 0))):
        with Locations(Location((9.92851316, -12.5, 0), (0, 0, 270))):
            Circle(SKETCH6_R)
    extrude(amount=-CUT_EXTRUDE5_DEPTH, mode=Mode.SUBTRACT)

    # Sketch7 → Cut-Extrude6 (cut)
    with BuildSketch(Plane(origin=(0, -10.03519833, 0), x_dir=(-1, 0, 0), z_dir=(0, -1, 0))):
        Polygon((-35.683884991, -9.237677709), (-38.131453055, -11.52301005), (-37.376081224, -14.785332341), (-34.173141329, -15.762322291), (-31.725573265, -13.47698995), (-32.480945096, -10.214667659), align=None)
        Polygon((12.105656047, -10.945271393), (12.242136974, -14.291120506), (15.207967766, -15.845849113), (18.037317633, -14.054728607), (17.900836706, -10.708879494), (14.935005914, -9.154150887), align=None)
    extrude(amount=-CUT_EXTRUDE6_DEPTH, mode=Mode.SUBTRACT)

    # Sketch8 → Cut-Extrude7 (cut)
    with BuildSketch(Plane(origin=(0, -2.03519833, 0), x_dir=(1, 0, 0), z_dir=(0, 1, 0))):
        with Locations(Location((-15.07148684, -12.5, 0), (0, 0, 270))):
            Circle(SKETCH8_R)
        with Locations(Location((34.92851316, -12.5, 0), (0, 0, 270))):
            Circle(SKETCH8_R)
    extrude(amount=-CUT_EXTRUDE7_DEPTH, mode=Mode.SUBTRACT)

    # Sketch10 → Cut-Extrude8 (cut)
    with BuildSketch(Plane.ZY.offset(20.07148684)):
        with Locations((25, -8.03519833)):
            Rectangle(SKETCH10_W, SKETCH10_H)
    extrude(amount=-CUT_EXTRUDE8_DEPTH, mode=Mode.SUBTRACT)


solid = part.part
